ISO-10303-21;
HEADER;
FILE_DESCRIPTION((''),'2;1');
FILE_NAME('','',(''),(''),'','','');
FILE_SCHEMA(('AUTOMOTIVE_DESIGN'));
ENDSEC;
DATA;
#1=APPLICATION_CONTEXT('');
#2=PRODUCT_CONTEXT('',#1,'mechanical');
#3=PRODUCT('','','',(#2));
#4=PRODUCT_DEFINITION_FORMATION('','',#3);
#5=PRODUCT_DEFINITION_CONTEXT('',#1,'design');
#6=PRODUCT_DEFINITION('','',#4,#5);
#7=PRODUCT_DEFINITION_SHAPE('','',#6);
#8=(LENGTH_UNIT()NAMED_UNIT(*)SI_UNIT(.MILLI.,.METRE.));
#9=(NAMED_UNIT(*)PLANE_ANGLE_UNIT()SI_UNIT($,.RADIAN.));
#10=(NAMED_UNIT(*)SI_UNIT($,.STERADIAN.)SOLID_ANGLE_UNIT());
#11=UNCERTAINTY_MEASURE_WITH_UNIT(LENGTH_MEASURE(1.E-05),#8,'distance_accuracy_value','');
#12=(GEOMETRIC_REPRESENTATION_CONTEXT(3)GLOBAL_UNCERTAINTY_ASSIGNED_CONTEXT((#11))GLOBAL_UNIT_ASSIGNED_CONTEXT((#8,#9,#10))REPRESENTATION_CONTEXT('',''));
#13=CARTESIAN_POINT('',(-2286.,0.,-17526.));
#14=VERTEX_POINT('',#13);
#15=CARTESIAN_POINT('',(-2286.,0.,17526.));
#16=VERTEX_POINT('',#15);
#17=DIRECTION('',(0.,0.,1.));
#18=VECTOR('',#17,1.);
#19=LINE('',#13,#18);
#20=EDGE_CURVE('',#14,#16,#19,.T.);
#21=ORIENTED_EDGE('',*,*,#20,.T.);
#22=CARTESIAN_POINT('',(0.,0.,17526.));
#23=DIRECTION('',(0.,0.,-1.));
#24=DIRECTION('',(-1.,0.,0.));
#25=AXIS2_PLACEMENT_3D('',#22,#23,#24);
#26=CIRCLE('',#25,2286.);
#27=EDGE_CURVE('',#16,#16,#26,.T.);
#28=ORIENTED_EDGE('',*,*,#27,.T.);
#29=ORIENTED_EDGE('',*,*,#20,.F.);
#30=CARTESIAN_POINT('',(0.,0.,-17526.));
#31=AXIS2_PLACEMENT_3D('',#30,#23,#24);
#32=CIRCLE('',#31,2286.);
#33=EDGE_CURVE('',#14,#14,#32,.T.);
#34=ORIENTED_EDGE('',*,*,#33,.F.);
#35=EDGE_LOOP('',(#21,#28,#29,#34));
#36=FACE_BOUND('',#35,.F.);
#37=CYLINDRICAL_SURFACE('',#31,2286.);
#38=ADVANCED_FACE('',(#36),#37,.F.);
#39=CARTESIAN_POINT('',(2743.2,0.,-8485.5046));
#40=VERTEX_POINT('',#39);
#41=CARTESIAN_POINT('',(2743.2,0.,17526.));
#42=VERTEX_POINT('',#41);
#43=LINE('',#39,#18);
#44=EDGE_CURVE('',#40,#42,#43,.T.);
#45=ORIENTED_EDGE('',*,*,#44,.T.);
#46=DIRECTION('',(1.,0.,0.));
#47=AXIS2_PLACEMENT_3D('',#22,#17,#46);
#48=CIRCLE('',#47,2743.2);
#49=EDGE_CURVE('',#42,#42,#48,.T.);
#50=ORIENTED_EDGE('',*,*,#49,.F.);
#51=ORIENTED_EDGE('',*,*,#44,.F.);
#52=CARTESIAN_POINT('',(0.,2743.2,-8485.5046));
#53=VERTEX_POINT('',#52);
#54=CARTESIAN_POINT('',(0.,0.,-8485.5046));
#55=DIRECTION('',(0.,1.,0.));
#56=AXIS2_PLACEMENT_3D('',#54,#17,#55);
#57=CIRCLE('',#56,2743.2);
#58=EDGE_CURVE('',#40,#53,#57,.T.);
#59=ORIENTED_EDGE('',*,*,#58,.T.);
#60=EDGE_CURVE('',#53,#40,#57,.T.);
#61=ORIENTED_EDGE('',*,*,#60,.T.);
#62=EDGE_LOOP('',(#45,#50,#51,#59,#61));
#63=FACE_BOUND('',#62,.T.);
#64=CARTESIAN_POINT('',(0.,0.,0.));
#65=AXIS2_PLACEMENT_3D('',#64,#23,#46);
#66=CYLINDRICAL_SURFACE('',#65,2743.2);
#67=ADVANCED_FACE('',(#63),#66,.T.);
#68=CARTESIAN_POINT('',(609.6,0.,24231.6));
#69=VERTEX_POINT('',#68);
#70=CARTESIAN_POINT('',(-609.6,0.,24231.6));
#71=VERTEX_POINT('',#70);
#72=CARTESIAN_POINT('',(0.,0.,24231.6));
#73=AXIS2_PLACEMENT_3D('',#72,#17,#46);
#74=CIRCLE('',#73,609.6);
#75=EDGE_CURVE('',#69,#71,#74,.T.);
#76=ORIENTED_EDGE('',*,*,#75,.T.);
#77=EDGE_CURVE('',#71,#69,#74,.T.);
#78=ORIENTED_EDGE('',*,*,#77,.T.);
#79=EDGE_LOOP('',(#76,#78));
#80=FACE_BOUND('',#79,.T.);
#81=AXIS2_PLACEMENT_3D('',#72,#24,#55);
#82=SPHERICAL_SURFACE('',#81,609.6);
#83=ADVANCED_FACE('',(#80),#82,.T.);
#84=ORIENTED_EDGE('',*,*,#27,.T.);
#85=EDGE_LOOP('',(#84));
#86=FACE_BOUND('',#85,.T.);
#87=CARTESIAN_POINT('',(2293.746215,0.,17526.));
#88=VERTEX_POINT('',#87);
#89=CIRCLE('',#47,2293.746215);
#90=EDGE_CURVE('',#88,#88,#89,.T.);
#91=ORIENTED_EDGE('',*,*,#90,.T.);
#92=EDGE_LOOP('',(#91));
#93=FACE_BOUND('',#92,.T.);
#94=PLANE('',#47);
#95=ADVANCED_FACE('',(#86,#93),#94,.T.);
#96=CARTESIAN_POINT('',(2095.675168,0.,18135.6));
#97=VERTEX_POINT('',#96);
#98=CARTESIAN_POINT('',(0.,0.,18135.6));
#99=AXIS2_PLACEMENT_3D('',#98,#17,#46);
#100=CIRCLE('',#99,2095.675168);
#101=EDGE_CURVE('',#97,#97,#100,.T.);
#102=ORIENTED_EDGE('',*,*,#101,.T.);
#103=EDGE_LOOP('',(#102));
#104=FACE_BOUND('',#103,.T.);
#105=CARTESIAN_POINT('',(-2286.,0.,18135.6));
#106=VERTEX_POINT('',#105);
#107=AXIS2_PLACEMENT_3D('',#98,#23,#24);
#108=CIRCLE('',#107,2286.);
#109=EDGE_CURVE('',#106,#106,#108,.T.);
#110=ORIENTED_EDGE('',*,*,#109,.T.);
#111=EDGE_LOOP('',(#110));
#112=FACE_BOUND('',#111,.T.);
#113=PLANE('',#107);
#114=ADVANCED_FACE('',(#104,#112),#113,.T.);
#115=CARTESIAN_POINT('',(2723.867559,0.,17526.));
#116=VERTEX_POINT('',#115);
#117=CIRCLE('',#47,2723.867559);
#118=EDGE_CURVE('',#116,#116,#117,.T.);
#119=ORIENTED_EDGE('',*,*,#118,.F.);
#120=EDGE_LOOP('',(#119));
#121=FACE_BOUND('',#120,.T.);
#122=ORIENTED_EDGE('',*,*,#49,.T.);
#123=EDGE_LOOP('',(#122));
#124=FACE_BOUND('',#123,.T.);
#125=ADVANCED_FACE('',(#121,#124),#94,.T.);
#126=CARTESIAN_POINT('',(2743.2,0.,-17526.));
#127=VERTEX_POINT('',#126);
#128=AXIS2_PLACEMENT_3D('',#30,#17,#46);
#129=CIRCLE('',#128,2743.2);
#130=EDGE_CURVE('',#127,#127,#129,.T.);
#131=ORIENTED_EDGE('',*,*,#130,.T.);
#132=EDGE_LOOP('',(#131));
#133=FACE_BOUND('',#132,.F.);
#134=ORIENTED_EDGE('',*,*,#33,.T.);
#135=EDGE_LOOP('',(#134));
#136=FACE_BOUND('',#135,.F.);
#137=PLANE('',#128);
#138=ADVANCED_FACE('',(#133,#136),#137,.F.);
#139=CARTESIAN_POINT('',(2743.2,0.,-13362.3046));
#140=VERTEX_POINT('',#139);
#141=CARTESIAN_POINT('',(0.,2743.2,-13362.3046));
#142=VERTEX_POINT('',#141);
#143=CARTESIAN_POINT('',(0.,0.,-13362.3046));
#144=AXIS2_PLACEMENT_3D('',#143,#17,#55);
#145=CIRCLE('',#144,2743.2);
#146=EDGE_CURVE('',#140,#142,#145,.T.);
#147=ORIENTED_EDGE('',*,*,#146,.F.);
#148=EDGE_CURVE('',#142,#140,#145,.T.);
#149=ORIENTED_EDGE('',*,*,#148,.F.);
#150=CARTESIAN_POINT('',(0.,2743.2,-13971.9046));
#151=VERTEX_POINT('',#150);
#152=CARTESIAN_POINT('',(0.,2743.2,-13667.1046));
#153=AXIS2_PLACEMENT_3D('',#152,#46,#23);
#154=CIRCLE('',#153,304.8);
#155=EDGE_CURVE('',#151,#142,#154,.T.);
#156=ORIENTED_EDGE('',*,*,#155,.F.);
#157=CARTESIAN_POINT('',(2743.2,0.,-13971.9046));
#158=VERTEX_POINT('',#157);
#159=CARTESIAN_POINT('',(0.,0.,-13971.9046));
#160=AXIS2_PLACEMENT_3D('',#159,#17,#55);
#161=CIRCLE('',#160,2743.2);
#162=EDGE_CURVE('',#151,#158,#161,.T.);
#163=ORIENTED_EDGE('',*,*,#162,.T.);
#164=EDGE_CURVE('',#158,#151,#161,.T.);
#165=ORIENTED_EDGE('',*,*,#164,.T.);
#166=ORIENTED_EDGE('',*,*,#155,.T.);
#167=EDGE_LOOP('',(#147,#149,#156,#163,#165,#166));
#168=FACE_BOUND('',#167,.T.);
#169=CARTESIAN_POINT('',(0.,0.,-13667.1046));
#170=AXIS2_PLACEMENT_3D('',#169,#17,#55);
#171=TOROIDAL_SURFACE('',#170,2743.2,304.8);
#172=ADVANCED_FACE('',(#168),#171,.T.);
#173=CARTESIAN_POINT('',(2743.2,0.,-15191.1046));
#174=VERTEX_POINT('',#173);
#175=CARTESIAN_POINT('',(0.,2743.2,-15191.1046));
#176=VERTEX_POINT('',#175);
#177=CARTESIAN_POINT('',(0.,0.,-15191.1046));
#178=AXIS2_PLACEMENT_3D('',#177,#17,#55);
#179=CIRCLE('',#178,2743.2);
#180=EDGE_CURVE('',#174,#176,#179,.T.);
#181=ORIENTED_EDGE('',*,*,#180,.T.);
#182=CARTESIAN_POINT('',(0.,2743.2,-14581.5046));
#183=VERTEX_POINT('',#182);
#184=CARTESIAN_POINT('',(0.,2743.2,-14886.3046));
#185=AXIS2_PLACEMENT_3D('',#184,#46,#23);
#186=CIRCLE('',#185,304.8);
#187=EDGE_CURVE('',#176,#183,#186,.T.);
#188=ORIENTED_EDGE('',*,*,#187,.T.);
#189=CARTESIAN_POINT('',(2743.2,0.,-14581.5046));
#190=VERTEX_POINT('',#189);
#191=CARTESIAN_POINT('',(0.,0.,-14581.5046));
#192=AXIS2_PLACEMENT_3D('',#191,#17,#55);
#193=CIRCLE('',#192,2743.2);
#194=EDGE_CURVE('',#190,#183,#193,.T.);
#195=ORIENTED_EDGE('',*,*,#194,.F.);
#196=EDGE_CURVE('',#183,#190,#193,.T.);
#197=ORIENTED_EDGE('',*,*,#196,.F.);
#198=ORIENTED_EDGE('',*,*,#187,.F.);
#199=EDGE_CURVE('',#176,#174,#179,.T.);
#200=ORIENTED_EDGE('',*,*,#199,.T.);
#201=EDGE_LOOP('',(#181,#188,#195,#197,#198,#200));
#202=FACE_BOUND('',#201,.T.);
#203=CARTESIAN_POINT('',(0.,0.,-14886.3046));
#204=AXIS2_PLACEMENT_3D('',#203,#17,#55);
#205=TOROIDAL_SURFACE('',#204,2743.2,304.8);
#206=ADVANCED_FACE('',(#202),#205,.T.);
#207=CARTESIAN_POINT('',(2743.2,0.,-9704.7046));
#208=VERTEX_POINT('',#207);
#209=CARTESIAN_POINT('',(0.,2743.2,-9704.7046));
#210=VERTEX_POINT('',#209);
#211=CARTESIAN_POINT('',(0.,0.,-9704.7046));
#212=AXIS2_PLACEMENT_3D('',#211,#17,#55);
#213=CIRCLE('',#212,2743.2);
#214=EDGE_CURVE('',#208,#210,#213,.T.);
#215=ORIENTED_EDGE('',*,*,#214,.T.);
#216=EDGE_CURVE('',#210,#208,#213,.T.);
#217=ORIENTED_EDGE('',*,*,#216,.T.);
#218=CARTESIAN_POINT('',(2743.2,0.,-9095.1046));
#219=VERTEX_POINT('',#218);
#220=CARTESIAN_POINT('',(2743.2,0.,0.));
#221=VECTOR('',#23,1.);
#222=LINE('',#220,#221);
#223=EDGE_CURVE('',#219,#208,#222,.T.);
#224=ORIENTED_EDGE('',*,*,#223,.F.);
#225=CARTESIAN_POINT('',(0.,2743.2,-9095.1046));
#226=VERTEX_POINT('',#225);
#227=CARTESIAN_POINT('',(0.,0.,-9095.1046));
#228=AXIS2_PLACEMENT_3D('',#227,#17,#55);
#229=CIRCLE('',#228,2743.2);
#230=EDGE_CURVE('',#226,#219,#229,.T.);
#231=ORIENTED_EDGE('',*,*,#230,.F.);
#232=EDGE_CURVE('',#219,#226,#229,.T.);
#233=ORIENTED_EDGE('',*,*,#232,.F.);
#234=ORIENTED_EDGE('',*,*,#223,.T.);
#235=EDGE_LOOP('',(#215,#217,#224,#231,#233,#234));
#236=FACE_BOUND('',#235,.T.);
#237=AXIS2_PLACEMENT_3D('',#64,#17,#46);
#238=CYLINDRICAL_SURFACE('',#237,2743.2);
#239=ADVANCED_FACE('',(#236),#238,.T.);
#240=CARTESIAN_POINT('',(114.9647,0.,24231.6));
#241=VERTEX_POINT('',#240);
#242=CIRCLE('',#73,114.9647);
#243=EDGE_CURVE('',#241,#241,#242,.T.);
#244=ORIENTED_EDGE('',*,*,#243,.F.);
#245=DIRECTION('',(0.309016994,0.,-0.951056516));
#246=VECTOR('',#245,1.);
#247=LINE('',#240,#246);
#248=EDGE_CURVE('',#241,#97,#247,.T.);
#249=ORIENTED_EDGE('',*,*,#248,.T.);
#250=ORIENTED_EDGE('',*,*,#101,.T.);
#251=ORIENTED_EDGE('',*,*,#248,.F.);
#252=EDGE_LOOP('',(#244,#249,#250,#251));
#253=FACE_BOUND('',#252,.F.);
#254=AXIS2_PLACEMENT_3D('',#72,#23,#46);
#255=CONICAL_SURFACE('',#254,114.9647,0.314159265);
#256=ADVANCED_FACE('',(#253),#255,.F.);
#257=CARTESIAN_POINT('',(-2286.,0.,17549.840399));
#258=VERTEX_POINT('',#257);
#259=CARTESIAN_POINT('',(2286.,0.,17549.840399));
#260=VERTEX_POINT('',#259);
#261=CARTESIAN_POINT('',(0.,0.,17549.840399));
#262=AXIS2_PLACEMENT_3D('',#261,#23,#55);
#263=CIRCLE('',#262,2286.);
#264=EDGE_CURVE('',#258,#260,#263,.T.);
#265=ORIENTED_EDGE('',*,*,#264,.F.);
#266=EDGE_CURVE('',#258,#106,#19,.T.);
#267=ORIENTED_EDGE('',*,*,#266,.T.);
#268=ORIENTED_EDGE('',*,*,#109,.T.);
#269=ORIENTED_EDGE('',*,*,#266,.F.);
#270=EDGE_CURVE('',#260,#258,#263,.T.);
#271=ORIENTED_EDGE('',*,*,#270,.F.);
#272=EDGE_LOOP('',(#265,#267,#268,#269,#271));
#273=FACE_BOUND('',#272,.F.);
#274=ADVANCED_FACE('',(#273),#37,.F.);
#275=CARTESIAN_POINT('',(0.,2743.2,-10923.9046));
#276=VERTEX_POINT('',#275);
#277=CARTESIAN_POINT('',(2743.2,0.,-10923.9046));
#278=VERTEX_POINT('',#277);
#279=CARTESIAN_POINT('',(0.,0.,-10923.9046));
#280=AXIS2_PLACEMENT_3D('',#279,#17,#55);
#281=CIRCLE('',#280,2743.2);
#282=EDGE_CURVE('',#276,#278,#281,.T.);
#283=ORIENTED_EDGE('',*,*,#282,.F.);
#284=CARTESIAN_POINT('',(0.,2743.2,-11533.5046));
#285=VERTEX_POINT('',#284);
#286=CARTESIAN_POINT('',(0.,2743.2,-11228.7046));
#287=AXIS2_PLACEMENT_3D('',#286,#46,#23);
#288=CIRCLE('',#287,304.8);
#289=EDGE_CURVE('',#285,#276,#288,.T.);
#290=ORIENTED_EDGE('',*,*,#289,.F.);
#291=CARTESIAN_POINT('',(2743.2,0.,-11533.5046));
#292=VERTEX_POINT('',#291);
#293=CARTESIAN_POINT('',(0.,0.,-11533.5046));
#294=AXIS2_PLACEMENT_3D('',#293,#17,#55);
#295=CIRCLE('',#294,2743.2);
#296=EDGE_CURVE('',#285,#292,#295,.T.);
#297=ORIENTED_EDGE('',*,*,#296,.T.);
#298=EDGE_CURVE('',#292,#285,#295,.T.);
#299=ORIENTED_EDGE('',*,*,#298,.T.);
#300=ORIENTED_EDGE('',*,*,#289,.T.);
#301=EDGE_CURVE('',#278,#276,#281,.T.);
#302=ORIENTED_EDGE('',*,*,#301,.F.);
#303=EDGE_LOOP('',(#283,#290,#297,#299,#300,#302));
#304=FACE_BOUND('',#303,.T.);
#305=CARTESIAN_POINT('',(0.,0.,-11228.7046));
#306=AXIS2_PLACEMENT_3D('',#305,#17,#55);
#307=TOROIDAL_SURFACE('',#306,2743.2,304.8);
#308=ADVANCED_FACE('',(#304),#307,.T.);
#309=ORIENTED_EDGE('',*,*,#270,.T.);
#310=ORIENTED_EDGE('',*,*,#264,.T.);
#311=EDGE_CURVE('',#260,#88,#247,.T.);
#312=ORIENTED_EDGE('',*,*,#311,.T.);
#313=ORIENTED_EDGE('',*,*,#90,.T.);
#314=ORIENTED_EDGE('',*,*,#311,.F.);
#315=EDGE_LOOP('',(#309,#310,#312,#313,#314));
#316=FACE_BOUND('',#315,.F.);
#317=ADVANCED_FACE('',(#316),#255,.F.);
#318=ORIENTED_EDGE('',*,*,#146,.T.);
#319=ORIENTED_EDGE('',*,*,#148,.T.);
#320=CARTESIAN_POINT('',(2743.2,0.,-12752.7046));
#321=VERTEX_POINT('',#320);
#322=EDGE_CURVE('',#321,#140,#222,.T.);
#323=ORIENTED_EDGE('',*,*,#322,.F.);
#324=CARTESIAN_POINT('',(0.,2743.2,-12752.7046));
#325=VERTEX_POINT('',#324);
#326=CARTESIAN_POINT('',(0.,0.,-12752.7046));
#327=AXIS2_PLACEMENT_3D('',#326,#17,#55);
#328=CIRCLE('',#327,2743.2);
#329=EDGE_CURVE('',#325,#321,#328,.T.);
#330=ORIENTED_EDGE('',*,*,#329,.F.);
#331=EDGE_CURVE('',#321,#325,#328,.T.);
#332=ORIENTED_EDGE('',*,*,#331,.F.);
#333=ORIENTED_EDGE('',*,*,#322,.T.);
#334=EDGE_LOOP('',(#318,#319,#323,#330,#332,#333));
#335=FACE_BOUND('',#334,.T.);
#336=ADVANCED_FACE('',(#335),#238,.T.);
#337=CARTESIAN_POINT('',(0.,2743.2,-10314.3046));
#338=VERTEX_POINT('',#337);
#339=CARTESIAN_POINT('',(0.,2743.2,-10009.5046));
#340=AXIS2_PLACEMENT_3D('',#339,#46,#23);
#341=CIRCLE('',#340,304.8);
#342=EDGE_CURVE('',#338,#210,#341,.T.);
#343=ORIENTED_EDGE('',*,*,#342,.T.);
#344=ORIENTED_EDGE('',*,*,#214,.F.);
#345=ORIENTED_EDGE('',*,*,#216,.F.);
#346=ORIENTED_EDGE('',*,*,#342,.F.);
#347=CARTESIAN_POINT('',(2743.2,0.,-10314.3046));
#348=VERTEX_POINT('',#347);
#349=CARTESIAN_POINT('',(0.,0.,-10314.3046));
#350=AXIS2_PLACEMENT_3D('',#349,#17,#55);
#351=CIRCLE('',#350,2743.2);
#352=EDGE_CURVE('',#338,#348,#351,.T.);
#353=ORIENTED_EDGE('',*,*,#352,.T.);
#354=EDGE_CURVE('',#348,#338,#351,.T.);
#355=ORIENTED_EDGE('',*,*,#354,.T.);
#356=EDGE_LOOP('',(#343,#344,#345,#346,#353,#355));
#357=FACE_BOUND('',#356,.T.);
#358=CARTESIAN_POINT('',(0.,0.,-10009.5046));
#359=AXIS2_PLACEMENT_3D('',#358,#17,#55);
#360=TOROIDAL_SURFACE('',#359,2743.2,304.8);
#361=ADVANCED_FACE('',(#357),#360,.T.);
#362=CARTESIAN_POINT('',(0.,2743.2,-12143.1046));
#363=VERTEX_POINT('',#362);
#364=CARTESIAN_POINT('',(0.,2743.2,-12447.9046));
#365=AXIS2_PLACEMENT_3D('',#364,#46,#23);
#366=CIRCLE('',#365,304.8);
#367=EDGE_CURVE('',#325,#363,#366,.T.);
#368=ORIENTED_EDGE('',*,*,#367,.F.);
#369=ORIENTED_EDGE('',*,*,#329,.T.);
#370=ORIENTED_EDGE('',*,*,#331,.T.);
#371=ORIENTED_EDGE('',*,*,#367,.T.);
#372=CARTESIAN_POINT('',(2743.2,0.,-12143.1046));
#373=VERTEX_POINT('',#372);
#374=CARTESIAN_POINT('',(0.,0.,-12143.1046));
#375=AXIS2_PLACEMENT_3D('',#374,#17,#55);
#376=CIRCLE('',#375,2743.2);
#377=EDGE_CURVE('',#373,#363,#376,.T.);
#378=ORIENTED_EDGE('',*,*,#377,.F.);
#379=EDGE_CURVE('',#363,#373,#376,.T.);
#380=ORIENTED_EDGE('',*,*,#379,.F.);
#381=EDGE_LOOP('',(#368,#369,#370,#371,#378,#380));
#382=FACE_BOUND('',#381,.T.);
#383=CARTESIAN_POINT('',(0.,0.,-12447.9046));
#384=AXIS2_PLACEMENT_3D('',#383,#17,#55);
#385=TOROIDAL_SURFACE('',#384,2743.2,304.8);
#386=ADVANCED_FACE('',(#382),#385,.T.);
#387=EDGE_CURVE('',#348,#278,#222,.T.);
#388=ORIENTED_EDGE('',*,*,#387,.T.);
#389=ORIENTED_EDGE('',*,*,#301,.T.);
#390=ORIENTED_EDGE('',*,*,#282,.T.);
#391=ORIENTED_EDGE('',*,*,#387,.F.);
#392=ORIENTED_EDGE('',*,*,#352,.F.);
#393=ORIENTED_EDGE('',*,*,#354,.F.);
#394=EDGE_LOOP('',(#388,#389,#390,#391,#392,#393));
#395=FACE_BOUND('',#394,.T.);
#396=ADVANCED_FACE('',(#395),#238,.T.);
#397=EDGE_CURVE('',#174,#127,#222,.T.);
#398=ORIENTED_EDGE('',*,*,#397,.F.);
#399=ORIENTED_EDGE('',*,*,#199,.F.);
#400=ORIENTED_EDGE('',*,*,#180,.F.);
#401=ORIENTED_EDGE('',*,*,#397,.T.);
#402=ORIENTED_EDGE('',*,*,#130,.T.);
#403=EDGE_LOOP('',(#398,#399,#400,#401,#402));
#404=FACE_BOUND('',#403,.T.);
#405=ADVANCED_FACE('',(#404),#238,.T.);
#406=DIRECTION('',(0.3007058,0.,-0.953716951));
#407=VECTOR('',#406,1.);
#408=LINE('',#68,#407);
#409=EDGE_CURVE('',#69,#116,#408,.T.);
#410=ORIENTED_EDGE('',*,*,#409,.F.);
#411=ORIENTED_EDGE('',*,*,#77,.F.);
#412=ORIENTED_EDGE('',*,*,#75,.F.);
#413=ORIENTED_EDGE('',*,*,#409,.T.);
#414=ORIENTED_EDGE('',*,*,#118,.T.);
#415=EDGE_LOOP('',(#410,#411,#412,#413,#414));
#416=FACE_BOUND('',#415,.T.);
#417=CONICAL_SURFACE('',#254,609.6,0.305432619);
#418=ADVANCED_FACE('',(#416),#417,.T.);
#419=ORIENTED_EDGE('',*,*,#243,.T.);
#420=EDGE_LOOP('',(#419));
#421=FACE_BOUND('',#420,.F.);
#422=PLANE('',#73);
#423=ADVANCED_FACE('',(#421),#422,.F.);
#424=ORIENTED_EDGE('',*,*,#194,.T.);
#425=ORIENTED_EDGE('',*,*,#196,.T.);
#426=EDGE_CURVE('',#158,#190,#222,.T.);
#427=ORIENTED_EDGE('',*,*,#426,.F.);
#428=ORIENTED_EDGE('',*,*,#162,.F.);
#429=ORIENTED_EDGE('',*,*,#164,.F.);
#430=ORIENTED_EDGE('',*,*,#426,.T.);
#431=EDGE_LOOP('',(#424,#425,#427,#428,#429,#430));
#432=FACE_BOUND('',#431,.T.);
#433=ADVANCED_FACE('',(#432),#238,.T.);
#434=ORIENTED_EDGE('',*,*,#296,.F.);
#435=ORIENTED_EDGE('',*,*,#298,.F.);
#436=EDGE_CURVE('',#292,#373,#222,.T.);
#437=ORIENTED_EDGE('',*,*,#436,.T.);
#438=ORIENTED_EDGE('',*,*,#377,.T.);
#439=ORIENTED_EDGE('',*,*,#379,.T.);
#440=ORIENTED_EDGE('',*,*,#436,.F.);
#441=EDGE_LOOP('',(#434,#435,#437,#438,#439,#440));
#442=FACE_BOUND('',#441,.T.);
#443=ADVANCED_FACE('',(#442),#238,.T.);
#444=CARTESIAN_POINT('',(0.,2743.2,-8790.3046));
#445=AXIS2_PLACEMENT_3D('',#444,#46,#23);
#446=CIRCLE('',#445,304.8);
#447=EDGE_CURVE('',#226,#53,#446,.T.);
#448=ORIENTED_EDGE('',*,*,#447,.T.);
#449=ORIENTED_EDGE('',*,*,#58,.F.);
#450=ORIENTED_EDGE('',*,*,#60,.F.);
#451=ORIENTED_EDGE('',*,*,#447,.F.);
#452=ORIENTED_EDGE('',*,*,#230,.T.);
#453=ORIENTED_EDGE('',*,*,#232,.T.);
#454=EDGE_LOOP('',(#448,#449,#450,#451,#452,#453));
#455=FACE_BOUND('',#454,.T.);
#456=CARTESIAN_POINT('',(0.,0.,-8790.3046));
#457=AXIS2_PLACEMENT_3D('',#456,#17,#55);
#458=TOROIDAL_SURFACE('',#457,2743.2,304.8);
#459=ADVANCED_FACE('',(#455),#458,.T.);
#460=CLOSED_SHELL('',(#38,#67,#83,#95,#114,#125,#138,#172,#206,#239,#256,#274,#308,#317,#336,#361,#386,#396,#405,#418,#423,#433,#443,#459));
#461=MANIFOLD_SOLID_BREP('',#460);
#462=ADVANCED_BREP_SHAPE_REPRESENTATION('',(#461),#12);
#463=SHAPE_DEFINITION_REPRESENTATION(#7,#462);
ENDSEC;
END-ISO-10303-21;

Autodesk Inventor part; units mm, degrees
ref_plane "YZ Plane" through (0, 0, 0) normal (1, 0, 0) x (0, 1, 0)
ref_plane "XZ Plane" through (0, 0, 0) normal (0, 1, 0) x (-1, 0, 0)
sketch "Sketch2" plane through (0, 0, 0) normal (0, 0, 1) x (1, 0, 0)
  circle A0 centre (0, 0) radius 2743.2
  dimension "d0" = 5486.4
extrude "Extrusion1" add sketch "Sketch2" along normal mid plane 35052
ref_plane "Work Plane1" through (0, 0, 24231.6) normal (0, 0, 1) x (1, 0, 0)
sketch "Sketch3" plane through (0, 0, 24231.6) normal (0, 0, 1) x (1, 0, 0)
  circle A0 centre (0, 0) radius 609.6
  dimension "d4" = 1219.2
extrude "Extrusion2" add sketch "Sketch3" against normal blind 6705.6 draft 17.5
sketch "Sketch4" plane through (0, 0, 24231.6) normal (0, 0, 1) x (1, 0, 0)
  arc A0 (609.6, 0) -> (-609.6, 0) centre (0, 0) ccw
  line L0 (-609.6, 0) -> (609.6, 0)
revolve "Revolution1" add sketch "Sketch4" angle 180 about axis through (-609.6, 0, 24231.6) along (1, 0, 0)
sketch "Sketch5" plane through (0, 0, 0) normal (1, 0, 0) x (0, 1, 0)
  arc A0 (2743.2, -15191.1046) -> (2743.2, -14581.5046) centre (2743.2, -14886.3046) ccw
  arc A1 (2743.2, -13971.9046) -> (2743.2, -13362.3046) centre (2743.2, -13667.1046) ccw
  arc A2 (2743.2, -12752.7046) -> (2743.2, -12143.1046) centre (2743.2, -12447.9046) ccw
  arc A3 (2743.2, -11533.5046) -> (2743.2, -10923.9046) centre (2743.2, -11228.7046) ccw
  arc A4 (2743.2, -10314.3046) -> (2743.2, -9704.7046) centre (2743.2, -10009.5046) ccw
  arc A5 (2743.2, -9095.1046) -> (2743.2, -8485.5046) centre (2743.2, -8790.3046) ccw
  line L0 (0, -20453.2822) -> (0, 20694.7178) construction
  line L1 (2743.2, -8485.5046) -> (2743.2, -9095.1046)
  line L2 (2743.2, -17526) -> (2743.2, 17526) projected
  line L3 (2743.2, -9704.7046) -> (2743.2, -10314.3046)
  line L4 (2743.2, -17526) -> (2743.2, 17526) projected
  line L5 (2743.2, -10923.9046) -> (2743.2, -11533.5046)
  line L6 (2743.2, -17526) -> (2743.2, 17526) projected
  line L7 (2743.2, -12143.1046) -> (2743.2, -12752.7046)
  line L8 (2743.2, -13362.3046) -> (2743.2, -13971.9046)
  line L9 (2743.2, -17526) -> (2743.2, 17526) projected
  line L10 (2743.2, -14581.5046) -> (2743.2, -15191.1046)
  line L11 (2743.2, -17526) -> (2743.2, 17526) projected
  point P0 (0, 0)
  dimension "d8" = 609.6
  dimension "d14" = 609.6
  dimension "d15" = 609.6
  dimension "d16" = 609.6
  dimension "d17" = 609.6
  dimension "d18" = 609.6
  dimension "d24" = 41148
sketch "Sketch6" plane through (0, 0, 24231.6) normal (0, 0, 1) x (1, 0, 0)
  circle A0 centre (0, 0) radius 114.9647
extrude "Extrusion3" cut sketch "Sketch6" against normal blind 6705.6 draft 18
sketch "Sketch7" plane through (0, 0, 17526) normal (0, 0, 1) x (1, 0, 0)
  point P0 (0, 0)
sketch "Sketch8" plane through (0, 0, -17526) normal (0, 0, -1) x (-1, 0, 0)
  circle A0 centre (0, 0) radius 2743.2
  circle A1 centre (0, 0) radius 2286
  dimension "d21" = 457.2
extrude "Extrusion4" cut sketch "Sketch8" against normal blind 35661.6 contours A1
revolve "Revolution2" add sketch "Sketch5" angle 360 about axis through (0, 0, -20453.2822) along (0, 0, 1)
properties part number "srb_body" material "Steel, Mild"
